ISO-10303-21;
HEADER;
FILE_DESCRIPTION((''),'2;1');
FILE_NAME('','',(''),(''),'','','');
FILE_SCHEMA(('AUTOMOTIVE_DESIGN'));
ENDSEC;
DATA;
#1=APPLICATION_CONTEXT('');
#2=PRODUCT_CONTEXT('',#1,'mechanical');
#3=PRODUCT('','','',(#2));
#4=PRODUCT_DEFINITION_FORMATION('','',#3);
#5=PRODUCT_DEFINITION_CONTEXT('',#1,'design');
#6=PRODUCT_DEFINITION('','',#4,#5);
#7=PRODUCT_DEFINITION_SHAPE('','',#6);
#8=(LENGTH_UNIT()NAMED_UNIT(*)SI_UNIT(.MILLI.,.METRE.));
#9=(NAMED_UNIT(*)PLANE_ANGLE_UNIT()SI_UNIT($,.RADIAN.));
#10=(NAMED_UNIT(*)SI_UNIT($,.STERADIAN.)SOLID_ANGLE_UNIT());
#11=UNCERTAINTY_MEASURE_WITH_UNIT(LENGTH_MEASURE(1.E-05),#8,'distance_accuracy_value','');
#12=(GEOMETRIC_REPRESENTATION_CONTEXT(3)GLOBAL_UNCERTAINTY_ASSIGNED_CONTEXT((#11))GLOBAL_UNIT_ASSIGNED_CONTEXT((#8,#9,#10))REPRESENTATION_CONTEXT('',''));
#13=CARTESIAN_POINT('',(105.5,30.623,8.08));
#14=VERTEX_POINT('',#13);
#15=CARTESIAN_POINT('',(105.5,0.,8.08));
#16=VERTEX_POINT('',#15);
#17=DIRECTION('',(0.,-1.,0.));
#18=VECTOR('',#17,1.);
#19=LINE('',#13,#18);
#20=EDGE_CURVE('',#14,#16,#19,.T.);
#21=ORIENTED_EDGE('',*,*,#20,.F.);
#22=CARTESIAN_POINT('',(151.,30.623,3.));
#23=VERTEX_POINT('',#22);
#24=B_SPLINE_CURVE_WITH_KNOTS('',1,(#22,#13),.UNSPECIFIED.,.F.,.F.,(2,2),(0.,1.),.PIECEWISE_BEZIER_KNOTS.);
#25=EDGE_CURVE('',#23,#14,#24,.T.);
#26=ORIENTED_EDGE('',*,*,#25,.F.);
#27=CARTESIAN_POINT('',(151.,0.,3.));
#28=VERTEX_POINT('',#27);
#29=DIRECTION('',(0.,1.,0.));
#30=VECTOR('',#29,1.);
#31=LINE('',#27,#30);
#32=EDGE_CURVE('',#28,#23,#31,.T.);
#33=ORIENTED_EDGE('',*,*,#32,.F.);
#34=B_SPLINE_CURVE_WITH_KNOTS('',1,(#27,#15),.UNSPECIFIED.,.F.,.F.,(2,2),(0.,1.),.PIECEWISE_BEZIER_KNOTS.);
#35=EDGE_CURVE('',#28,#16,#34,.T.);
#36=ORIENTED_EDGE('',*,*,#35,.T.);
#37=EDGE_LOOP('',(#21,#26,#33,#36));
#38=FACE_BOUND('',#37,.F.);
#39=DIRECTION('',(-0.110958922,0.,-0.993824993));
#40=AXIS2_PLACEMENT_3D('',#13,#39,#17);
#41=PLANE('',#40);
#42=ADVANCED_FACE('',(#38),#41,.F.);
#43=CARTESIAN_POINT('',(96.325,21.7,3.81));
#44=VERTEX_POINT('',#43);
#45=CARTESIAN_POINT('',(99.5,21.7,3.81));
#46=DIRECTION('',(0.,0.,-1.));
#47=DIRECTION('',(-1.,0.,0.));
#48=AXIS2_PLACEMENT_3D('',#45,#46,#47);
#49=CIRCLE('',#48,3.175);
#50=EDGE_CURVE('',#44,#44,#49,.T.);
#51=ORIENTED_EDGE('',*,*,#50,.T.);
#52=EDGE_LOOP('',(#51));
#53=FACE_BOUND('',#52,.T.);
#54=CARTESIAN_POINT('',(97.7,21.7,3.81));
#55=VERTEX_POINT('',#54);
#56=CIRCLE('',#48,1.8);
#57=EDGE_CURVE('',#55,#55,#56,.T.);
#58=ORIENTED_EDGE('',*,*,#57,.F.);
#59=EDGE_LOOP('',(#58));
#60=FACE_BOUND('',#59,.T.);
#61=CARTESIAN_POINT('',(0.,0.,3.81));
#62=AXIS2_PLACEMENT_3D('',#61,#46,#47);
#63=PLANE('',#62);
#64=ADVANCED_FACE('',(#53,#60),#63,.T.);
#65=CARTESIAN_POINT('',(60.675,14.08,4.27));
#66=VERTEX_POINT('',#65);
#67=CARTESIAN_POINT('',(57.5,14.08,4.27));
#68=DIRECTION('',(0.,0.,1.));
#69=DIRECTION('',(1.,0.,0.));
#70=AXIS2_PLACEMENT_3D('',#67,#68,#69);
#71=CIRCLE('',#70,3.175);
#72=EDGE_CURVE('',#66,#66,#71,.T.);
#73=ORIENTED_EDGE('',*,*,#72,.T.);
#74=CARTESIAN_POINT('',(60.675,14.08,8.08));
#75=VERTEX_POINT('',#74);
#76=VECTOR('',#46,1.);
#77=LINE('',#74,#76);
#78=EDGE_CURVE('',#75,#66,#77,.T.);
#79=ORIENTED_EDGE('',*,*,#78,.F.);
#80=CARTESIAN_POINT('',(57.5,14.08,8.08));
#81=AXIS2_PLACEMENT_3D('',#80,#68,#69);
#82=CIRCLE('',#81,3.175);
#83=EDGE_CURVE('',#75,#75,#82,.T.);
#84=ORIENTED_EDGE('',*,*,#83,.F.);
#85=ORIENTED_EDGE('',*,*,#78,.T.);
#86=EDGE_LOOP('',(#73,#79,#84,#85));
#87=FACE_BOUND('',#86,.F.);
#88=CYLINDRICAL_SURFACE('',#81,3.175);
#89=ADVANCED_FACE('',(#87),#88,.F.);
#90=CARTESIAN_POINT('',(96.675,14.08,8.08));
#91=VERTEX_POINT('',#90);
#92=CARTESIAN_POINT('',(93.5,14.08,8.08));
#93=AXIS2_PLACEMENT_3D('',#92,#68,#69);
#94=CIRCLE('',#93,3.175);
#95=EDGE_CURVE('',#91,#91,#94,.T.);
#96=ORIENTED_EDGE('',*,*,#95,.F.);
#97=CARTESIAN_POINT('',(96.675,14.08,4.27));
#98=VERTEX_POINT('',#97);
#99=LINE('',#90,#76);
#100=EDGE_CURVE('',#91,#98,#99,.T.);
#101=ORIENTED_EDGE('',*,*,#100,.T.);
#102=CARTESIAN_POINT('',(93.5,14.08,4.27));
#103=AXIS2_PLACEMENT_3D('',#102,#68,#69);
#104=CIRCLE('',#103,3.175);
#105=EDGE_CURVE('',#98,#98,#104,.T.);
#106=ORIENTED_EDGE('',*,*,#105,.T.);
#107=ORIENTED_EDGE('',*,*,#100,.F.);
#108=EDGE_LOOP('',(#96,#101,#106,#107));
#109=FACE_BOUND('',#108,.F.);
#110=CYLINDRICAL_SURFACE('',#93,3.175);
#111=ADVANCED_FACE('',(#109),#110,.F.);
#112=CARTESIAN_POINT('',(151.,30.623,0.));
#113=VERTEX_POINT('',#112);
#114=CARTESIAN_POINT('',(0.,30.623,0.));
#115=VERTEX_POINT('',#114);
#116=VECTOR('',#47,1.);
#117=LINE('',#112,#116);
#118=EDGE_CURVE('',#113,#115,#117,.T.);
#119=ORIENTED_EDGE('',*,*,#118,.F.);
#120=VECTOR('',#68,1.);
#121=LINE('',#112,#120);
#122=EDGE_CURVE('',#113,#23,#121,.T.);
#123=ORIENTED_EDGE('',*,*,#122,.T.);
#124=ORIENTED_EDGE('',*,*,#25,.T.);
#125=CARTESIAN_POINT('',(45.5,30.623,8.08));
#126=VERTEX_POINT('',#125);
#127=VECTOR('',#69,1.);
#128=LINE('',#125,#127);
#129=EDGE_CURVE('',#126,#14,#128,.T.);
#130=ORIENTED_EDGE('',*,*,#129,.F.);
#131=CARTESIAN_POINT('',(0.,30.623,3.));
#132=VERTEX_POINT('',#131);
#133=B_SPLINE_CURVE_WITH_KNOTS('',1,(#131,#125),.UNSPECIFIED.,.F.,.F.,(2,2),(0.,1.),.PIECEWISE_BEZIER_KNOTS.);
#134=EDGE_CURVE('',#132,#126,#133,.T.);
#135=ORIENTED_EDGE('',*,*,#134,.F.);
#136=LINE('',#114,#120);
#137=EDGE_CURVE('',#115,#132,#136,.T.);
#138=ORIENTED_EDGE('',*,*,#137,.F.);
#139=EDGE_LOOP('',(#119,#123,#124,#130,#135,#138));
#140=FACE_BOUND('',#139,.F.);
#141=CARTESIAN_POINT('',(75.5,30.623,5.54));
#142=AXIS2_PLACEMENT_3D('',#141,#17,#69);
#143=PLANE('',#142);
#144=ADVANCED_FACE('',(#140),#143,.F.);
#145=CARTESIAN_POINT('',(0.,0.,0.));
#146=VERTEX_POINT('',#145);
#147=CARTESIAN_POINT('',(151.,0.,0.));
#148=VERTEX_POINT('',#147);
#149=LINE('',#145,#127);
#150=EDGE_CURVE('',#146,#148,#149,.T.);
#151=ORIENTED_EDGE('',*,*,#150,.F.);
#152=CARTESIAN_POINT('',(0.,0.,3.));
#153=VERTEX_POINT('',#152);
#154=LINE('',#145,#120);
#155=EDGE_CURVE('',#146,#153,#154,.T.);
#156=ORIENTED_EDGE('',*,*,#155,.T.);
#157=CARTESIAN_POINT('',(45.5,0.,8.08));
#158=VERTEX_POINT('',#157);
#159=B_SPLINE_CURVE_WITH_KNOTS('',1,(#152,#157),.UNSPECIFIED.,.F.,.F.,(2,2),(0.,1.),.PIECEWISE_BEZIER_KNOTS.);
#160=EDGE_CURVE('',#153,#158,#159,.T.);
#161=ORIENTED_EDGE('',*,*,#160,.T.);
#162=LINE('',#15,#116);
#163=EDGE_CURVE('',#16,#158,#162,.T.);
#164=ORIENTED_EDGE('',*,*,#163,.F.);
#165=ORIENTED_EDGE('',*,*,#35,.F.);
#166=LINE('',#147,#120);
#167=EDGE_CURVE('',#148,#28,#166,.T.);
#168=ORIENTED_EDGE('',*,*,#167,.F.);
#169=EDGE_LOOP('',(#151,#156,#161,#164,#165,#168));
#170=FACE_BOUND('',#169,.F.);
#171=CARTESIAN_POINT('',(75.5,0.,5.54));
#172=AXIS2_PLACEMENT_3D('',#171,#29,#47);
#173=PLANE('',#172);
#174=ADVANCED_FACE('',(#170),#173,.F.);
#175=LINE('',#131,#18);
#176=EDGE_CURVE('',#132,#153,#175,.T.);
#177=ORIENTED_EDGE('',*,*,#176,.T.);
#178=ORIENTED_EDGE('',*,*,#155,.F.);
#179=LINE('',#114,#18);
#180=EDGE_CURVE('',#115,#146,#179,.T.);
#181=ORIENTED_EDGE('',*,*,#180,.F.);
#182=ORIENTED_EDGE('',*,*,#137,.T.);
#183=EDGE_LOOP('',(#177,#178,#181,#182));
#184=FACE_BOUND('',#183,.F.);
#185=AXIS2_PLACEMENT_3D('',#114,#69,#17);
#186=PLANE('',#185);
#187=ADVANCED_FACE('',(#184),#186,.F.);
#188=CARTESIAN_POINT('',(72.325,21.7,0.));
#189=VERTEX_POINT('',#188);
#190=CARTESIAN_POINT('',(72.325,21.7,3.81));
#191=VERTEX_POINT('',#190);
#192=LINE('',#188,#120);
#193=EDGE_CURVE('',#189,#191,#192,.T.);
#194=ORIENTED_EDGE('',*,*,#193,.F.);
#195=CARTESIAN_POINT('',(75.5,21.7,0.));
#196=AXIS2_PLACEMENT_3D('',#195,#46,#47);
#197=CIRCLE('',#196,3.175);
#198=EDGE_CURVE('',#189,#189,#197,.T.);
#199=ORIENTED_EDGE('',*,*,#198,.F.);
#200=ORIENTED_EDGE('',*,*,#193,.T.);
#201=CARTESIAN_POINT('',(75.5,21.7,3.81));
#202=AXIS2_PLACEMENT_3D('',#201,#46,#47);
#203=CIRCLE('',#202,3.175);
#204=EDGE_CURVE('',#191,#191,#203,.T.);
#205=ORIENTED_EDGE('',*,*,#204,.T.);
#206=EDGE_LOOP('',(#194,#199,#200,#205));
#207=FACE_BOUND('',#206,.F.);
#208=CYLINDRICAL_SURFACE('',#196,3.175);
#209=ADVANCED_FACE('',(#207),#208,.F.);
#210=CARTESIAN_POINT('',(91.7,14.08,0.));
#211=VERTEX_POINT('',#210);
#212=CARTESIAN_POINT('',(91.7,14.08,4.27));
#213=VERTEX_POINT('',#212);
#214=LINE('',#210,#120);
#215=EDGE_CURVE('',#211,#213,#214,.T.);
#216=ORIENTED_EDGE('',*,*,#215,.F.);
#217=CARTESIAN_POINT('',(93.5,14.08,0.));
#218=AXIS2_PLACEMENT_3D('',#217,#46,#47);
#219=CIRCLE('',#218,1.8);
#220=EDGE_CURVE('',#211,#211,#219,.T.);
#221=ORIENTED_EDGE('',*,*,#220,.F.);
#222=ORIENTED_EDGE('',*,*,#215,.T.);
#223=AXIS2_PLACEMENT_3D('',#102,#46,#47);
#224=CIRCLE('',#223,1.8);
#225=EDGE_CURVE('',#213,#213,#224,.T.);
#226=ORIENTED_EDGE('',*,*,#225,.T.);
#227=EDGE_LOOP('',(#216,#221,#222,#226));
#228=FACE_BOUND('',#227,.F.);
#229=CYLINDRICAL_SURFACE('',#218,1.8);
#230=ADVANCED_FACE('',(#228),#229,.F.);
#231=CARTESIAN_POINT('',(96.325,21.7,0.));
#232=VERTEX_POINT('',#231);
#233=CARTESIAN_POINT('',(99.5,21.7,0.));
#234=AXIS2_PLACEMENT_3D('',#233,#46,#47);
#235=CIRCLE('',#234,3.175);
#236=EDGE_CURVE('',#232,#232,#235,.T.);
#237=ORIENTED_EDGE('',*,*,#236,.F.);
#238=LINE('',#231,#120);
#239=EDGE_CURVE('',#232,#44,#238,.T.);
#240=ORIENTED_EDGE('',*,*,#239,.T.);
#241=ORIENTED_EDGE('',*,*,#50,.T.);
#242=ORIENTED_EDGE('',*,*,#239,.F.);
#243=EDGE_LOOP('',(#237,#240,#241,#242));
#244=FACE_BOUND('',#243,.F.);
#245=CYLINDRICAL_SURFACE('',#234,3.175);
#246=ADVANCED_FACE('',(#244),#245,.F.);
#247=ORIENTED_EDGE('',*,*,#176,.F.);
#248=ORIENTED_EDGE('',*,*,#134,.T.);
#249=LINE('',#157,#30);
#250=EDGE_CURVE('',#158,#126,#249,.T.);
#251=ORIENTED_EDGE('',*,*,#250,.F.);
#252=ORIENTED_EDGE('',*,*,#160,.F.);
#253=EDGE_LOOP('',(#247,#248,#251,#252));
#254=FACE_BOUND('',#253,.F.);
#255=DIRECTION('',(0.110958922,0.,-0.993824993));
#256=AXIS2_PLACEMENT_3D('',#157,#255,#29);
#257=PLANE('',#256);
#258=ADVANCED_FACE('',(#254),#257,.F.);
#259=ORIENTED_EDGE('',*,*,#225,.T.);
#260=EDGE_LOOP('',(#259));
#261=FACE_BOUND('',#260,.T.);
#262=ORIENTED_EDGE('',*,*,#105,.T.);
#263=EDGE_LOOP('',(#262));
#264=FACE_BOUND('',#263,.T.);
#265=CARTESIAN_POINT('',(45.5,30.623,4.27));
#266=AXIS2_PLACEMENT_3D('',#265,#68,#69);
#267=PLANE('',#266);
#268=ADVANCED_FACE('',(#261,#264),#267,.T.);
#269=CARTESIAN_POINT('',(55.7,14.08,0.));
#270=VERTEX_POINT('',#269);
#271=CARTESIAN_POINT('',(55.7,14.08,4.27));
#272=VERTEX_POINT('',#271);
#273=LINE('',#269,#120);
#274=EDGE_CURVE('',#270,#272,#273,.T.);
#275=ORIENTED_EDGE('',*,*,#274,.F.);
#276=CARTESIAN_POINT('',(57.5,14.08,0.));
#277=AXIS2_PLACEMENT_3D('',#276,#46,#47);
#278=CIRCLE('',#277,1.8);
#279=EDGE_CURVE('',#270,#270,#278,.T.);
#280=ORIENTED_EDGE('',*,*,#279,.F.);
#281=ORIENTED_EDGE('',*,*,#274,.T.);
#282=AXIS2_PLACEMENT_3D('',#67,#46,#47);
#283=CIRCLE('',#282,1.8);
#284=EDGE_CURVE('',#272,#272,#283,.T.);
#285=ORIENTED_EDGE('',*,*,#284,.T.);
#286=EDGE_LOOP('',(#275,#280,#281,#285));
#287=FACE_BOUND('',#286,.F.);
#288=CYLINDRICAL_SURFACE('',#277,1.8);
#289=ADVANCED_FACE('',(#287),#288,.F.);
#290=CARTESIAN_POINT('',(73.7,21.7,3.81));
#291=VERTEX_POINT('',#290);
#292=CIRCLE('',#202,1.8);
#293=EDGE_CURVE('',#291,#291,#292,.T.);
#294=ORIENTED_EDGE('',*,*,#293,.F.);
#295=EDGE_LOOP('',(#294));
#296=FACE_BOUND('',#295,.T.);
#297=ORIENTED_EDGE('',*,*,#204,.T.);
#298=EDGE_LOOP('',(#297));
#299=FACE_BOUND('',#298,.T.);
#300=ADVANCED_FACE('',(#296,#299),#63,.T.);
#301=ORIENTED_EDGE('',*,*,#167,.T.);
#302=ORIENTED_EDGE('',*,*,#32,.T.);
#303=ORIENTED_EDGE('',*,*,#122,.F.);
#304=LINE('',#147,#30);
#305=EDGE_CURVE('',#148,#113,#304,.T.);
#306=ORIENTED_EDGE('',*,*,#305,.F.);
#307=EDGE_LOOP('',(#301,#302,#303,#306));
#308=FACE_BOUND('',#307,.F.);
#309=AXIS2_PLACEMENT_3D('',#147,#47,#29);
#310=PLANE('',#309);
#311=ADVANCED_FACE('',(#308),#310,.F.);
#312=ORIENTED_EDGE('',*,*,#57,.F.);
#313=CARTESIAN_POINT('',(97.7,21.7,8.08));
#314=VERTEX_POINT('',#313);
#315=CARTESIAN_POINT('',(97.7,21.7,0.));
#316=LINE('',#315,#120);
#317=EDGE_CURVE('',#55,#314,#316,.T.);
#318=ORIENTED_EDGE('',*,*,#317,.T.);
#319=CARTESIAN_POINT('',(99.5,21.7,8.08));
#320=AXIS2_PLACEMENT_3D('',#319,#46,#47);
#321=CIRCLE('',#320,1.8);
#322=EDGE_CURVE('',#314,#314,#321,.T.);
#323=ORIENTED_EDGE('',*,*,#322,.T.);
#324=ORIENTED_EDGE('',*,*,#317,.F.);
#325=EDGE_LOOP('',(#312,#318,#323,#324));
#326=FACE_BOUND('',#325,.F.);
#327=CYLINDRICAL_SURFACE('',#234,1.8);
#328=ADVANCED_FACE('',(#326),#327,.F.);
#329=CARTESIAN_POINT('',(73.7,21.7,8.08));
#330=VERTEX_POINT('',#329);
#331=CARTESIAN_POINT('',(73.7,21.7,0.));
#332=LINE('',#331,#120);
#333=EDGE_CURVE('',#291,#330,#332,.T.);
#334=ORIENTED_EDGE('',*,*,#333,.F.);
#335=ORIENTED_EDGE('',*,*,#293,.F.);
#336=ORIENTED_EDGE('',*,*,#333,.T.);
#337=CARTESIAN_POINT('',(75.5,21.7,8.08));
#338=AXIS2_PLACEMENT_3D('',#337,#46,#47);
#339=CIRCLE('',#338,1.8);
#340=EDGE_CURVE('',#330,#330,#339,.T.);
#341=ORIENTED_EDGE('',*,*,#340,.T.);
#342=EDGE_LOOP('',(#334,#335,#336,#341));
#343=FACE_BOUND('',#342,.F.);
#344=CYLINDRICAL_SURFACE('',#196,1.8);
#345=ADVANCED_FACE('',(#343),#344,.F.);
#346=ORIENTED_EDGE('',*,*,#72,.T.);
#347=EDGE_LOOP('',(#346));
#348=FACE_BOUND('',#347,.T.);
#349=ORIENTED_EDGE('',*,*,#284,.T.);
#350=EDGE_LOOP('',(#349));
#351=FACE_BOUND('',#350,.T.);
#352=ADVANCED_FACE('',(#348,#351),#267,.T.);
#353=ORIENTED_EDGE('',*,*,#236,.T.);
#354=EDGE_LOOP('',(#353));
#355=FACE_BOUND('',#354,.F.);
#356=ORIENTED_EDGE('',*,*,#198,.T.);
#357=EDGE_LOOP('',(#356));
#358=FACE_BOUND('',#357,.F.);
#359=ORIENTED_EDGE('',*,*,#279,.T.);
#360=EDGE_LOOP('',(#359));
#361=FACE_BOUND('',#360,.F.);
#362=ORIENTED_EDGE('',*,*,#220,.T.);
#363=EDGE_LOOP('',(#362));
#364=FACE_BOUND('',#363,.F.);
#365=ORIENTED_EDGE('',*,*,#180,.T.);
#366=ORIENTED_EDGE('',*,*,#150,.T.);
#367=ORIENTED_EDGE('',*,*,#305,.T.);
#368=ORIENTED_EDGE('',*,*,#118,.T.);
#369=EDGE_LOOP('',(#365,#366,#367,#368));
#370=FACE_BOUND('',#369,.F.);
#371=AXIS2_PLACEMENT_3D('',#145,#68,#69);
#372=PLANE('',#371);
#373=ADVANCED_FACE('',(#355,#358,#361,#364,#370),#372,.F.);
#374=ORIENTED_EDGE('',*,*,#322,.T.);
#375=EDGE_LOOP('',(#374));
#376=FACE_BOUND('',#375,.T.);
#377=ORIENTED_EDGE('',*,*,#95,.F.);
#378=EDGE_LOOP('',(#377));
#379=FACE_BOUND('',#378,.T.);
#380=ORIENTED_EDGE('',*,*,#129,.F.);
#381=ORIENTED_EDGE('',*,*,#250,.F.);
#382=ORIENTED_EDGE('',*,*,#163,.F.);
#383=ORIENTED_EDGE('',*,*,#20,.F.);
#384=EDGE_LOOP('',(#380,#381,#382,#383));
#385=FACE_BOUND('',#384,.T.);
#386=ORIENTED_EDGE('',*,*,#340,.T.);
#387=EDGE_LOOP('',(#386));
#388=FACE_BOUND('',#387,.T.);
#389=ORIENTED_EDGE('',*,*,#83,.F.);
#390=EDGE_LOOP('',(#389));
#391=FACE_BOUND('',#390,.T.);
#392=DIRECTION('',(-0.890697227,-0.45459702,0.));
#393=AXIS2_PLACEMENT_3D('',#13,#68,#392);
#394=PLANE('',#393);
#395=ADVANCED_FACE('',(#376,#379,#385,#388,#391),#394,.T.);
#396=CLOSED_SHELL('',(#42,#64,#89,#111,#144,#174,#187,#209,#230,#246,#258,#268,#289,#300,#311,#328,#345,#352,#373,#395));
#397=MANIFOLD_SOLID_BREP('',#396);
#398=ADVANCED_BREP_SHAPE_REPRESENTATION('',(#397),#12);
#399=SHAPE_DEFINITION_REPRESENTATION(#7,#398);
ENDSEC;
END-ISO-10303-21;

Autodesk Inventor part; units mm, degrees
ref_plane "YZ Plane" through (0, 0, 0) normal (1, 0, 0) x (0, 1, 0)
ref_plane "XZ Plane" through (0, 0, 0) normal (0, 1, 0) x (-1, 0, 0)
sketch "Sketch1" plane through (0, 0, 0) normal (0, 0, 1) x (1, 0, 0)
  line L0 (0, 0) -> (151, 0)
  line L1 (151, 0) -> (151, 30.623)
  line L2 (151, 30.623) -> (0, 30.623)
  line L3 (0, 30.623) -> (0, 0)
  dimension "d0" = 151
  dimension "d1" = 30.623
extrude "Extrusion1" add sketch "Sketch1" along normal blind 3
ref_plane "Work Plane2" through (0, 0, 8.08) normal (0, 0, 1) x (1, 0, 0)
sketch "Sketch2" plane through (0, 0, 8.08) normal (0, 0, 1) x (1, 0, 0)
  line L0 (151, 0) -> (151, 30.623) construction
  line L1 (151, 30.623) -> (0, 30.623) construction
  line L2 (0, 30.623) -> (0, 0) projected
  line L3 (0, 0) -> (151, 0) construction
  line L4 (45.5, 30.623) -> (105.5, 30.623)
  line L5 (105.5, 30.623) -> (105.5, 0)
  line L6 (105.5, 0) -> (45.5, 0)
  line L7 (45.5, 0) -> (45.5, 30.623)
  line L8 (45.5, 15.3115) -> (0, 15.3115) construction
  line L9 (105.5, 15.3115) -> (151, 15.3115) construction
  dimension "d6" = 60
loft "Loft1" add profiles "Sketch2" section 1 edges at (151, 15.3115, 3) (75.5, 30.623, 3) (0, 15.3115, 3) (75.5, 0, 3)
sketch "Sketch7" plane through (0, 0, 0) normal (0, 0, -1) x (-1, 0, 0)
  circle A0 centre (-93.5, 14.08) radius 1.8
  circle A1 centre (-57.5, 14.08) radius 1.8
  line L0 (0, 0) -> (-151, 0) projected
  line L1 (-151, 0) -> (-151, 30.623) projected
  line L2 (0, 30.623) -> (0, 0) projected
  dimension "d25" = 14.08
  dimension "d26" = 14.08
  dimension "d27" = 57.5
  dimension "d28" = 3.6
  dimension "d29" = 57.5
  dimension "d30" = 3.6
extrude "Extrusion4" cut sketch "Sketch7" along normal mid plane 225.25
sketch "Sketch8" plane through (45.5, 30.623, 8.08) normal (0, 0, 1) x (1, 0, 0)
  circle A0 centre (48, -16.543) radius 1.8 projected
  circle A1 centre (12, -16.543) radius 1.8 projected
  line L0 (60, 0) -> (60, -30.623) projected
  line L1 (0, 0) -> (60, 0) projected
  line L2 (0, -30.623) -> (0, 0) projected
  line L3 (60, -30.623) -> (0, -30.623) projected
  circle A2 centre (12, -16.543) radius 3.175
  circle A3 centre (48, -16.543) radius 3.175
  point P0 (-45.5, -30.623)
  dimension "d33" = 6.35
  dimension "d34" = 6.35
extrude "Extrusion5" cut sketch "Sketch8" against normal blind 3.81 contours A0 | A1 | A2 | A3
sketch "Sketch9" plane through (0, 0, 0) normal (0, 0, -1) x (-1, 0, 0)
  circle A0 centre (-75.5, 21.7) radius 1.8
  circle A1 centre (-99.5, 21.7) radius 1.8
  circle A2 centre (-93.5, 14.08) radius 1.8 projected
  circle A3 centre (-57.5, 14.08) radius 1.8 projected
  line L0 (-151, 0) -> (-151, 30.623) projected
  line L1 (0, 0) -> (-151, 0) projected
  line L2 (0, 30.623) -> (0, 0) projected
  line L3 (-151, 30.623) -> (0, 30.623) projected
  line L4 (-75.5, 21.7) -> (-75.5, 0) construction
  line L5 (-75.5, 21.7) -> (-99.5, 21.7) construction
  dimension "d37" = 3.6
  dimension "d38" = 3.6
  dimension "d40" = 24
  dimension "d43" = 7.62
extrude "Extrusion6" cut sketch "Sketch9" along normal mid plane 73.66 contours A0 | A1
sketch "Sketch11" plane through (0, 0, 0) normal (0, 0, -1) x (-1, 0, 0)
  circle A0 centre (-99.5, 21.7) radius 1.8 projected
  circle A1 centre (-75.5, 21.7) radius 1.8 projected
  circle A2 centre (-93.5, 14.08) radius 1.8 projected
  circle A3 centre (-57.5, 14.08) radius 1.8 projected
  line L0 (-151, 0) -> (-151, 30.623) projected
  line L1 (0, 0) -> (-151, 0) projected
  line L2 (0, 30.623) -> (0, 0) projected
  line L3 (-151, 30.623) -> (0, 30.623) projected
  circle A4 centre (-75.5, 21.7) radius 3.175
  circle A5 centre (-99.5, 21.7) radius 3.175
  dimension "d44" = 6.35
  dimension "d45" = 6.35
extrude "Extrusion7" cut sketch "Sketch11" against normal blind 3.81 contours A0 | A1 | A4 | A5
properties part number "ZED_mount_V2_3DPrint"
